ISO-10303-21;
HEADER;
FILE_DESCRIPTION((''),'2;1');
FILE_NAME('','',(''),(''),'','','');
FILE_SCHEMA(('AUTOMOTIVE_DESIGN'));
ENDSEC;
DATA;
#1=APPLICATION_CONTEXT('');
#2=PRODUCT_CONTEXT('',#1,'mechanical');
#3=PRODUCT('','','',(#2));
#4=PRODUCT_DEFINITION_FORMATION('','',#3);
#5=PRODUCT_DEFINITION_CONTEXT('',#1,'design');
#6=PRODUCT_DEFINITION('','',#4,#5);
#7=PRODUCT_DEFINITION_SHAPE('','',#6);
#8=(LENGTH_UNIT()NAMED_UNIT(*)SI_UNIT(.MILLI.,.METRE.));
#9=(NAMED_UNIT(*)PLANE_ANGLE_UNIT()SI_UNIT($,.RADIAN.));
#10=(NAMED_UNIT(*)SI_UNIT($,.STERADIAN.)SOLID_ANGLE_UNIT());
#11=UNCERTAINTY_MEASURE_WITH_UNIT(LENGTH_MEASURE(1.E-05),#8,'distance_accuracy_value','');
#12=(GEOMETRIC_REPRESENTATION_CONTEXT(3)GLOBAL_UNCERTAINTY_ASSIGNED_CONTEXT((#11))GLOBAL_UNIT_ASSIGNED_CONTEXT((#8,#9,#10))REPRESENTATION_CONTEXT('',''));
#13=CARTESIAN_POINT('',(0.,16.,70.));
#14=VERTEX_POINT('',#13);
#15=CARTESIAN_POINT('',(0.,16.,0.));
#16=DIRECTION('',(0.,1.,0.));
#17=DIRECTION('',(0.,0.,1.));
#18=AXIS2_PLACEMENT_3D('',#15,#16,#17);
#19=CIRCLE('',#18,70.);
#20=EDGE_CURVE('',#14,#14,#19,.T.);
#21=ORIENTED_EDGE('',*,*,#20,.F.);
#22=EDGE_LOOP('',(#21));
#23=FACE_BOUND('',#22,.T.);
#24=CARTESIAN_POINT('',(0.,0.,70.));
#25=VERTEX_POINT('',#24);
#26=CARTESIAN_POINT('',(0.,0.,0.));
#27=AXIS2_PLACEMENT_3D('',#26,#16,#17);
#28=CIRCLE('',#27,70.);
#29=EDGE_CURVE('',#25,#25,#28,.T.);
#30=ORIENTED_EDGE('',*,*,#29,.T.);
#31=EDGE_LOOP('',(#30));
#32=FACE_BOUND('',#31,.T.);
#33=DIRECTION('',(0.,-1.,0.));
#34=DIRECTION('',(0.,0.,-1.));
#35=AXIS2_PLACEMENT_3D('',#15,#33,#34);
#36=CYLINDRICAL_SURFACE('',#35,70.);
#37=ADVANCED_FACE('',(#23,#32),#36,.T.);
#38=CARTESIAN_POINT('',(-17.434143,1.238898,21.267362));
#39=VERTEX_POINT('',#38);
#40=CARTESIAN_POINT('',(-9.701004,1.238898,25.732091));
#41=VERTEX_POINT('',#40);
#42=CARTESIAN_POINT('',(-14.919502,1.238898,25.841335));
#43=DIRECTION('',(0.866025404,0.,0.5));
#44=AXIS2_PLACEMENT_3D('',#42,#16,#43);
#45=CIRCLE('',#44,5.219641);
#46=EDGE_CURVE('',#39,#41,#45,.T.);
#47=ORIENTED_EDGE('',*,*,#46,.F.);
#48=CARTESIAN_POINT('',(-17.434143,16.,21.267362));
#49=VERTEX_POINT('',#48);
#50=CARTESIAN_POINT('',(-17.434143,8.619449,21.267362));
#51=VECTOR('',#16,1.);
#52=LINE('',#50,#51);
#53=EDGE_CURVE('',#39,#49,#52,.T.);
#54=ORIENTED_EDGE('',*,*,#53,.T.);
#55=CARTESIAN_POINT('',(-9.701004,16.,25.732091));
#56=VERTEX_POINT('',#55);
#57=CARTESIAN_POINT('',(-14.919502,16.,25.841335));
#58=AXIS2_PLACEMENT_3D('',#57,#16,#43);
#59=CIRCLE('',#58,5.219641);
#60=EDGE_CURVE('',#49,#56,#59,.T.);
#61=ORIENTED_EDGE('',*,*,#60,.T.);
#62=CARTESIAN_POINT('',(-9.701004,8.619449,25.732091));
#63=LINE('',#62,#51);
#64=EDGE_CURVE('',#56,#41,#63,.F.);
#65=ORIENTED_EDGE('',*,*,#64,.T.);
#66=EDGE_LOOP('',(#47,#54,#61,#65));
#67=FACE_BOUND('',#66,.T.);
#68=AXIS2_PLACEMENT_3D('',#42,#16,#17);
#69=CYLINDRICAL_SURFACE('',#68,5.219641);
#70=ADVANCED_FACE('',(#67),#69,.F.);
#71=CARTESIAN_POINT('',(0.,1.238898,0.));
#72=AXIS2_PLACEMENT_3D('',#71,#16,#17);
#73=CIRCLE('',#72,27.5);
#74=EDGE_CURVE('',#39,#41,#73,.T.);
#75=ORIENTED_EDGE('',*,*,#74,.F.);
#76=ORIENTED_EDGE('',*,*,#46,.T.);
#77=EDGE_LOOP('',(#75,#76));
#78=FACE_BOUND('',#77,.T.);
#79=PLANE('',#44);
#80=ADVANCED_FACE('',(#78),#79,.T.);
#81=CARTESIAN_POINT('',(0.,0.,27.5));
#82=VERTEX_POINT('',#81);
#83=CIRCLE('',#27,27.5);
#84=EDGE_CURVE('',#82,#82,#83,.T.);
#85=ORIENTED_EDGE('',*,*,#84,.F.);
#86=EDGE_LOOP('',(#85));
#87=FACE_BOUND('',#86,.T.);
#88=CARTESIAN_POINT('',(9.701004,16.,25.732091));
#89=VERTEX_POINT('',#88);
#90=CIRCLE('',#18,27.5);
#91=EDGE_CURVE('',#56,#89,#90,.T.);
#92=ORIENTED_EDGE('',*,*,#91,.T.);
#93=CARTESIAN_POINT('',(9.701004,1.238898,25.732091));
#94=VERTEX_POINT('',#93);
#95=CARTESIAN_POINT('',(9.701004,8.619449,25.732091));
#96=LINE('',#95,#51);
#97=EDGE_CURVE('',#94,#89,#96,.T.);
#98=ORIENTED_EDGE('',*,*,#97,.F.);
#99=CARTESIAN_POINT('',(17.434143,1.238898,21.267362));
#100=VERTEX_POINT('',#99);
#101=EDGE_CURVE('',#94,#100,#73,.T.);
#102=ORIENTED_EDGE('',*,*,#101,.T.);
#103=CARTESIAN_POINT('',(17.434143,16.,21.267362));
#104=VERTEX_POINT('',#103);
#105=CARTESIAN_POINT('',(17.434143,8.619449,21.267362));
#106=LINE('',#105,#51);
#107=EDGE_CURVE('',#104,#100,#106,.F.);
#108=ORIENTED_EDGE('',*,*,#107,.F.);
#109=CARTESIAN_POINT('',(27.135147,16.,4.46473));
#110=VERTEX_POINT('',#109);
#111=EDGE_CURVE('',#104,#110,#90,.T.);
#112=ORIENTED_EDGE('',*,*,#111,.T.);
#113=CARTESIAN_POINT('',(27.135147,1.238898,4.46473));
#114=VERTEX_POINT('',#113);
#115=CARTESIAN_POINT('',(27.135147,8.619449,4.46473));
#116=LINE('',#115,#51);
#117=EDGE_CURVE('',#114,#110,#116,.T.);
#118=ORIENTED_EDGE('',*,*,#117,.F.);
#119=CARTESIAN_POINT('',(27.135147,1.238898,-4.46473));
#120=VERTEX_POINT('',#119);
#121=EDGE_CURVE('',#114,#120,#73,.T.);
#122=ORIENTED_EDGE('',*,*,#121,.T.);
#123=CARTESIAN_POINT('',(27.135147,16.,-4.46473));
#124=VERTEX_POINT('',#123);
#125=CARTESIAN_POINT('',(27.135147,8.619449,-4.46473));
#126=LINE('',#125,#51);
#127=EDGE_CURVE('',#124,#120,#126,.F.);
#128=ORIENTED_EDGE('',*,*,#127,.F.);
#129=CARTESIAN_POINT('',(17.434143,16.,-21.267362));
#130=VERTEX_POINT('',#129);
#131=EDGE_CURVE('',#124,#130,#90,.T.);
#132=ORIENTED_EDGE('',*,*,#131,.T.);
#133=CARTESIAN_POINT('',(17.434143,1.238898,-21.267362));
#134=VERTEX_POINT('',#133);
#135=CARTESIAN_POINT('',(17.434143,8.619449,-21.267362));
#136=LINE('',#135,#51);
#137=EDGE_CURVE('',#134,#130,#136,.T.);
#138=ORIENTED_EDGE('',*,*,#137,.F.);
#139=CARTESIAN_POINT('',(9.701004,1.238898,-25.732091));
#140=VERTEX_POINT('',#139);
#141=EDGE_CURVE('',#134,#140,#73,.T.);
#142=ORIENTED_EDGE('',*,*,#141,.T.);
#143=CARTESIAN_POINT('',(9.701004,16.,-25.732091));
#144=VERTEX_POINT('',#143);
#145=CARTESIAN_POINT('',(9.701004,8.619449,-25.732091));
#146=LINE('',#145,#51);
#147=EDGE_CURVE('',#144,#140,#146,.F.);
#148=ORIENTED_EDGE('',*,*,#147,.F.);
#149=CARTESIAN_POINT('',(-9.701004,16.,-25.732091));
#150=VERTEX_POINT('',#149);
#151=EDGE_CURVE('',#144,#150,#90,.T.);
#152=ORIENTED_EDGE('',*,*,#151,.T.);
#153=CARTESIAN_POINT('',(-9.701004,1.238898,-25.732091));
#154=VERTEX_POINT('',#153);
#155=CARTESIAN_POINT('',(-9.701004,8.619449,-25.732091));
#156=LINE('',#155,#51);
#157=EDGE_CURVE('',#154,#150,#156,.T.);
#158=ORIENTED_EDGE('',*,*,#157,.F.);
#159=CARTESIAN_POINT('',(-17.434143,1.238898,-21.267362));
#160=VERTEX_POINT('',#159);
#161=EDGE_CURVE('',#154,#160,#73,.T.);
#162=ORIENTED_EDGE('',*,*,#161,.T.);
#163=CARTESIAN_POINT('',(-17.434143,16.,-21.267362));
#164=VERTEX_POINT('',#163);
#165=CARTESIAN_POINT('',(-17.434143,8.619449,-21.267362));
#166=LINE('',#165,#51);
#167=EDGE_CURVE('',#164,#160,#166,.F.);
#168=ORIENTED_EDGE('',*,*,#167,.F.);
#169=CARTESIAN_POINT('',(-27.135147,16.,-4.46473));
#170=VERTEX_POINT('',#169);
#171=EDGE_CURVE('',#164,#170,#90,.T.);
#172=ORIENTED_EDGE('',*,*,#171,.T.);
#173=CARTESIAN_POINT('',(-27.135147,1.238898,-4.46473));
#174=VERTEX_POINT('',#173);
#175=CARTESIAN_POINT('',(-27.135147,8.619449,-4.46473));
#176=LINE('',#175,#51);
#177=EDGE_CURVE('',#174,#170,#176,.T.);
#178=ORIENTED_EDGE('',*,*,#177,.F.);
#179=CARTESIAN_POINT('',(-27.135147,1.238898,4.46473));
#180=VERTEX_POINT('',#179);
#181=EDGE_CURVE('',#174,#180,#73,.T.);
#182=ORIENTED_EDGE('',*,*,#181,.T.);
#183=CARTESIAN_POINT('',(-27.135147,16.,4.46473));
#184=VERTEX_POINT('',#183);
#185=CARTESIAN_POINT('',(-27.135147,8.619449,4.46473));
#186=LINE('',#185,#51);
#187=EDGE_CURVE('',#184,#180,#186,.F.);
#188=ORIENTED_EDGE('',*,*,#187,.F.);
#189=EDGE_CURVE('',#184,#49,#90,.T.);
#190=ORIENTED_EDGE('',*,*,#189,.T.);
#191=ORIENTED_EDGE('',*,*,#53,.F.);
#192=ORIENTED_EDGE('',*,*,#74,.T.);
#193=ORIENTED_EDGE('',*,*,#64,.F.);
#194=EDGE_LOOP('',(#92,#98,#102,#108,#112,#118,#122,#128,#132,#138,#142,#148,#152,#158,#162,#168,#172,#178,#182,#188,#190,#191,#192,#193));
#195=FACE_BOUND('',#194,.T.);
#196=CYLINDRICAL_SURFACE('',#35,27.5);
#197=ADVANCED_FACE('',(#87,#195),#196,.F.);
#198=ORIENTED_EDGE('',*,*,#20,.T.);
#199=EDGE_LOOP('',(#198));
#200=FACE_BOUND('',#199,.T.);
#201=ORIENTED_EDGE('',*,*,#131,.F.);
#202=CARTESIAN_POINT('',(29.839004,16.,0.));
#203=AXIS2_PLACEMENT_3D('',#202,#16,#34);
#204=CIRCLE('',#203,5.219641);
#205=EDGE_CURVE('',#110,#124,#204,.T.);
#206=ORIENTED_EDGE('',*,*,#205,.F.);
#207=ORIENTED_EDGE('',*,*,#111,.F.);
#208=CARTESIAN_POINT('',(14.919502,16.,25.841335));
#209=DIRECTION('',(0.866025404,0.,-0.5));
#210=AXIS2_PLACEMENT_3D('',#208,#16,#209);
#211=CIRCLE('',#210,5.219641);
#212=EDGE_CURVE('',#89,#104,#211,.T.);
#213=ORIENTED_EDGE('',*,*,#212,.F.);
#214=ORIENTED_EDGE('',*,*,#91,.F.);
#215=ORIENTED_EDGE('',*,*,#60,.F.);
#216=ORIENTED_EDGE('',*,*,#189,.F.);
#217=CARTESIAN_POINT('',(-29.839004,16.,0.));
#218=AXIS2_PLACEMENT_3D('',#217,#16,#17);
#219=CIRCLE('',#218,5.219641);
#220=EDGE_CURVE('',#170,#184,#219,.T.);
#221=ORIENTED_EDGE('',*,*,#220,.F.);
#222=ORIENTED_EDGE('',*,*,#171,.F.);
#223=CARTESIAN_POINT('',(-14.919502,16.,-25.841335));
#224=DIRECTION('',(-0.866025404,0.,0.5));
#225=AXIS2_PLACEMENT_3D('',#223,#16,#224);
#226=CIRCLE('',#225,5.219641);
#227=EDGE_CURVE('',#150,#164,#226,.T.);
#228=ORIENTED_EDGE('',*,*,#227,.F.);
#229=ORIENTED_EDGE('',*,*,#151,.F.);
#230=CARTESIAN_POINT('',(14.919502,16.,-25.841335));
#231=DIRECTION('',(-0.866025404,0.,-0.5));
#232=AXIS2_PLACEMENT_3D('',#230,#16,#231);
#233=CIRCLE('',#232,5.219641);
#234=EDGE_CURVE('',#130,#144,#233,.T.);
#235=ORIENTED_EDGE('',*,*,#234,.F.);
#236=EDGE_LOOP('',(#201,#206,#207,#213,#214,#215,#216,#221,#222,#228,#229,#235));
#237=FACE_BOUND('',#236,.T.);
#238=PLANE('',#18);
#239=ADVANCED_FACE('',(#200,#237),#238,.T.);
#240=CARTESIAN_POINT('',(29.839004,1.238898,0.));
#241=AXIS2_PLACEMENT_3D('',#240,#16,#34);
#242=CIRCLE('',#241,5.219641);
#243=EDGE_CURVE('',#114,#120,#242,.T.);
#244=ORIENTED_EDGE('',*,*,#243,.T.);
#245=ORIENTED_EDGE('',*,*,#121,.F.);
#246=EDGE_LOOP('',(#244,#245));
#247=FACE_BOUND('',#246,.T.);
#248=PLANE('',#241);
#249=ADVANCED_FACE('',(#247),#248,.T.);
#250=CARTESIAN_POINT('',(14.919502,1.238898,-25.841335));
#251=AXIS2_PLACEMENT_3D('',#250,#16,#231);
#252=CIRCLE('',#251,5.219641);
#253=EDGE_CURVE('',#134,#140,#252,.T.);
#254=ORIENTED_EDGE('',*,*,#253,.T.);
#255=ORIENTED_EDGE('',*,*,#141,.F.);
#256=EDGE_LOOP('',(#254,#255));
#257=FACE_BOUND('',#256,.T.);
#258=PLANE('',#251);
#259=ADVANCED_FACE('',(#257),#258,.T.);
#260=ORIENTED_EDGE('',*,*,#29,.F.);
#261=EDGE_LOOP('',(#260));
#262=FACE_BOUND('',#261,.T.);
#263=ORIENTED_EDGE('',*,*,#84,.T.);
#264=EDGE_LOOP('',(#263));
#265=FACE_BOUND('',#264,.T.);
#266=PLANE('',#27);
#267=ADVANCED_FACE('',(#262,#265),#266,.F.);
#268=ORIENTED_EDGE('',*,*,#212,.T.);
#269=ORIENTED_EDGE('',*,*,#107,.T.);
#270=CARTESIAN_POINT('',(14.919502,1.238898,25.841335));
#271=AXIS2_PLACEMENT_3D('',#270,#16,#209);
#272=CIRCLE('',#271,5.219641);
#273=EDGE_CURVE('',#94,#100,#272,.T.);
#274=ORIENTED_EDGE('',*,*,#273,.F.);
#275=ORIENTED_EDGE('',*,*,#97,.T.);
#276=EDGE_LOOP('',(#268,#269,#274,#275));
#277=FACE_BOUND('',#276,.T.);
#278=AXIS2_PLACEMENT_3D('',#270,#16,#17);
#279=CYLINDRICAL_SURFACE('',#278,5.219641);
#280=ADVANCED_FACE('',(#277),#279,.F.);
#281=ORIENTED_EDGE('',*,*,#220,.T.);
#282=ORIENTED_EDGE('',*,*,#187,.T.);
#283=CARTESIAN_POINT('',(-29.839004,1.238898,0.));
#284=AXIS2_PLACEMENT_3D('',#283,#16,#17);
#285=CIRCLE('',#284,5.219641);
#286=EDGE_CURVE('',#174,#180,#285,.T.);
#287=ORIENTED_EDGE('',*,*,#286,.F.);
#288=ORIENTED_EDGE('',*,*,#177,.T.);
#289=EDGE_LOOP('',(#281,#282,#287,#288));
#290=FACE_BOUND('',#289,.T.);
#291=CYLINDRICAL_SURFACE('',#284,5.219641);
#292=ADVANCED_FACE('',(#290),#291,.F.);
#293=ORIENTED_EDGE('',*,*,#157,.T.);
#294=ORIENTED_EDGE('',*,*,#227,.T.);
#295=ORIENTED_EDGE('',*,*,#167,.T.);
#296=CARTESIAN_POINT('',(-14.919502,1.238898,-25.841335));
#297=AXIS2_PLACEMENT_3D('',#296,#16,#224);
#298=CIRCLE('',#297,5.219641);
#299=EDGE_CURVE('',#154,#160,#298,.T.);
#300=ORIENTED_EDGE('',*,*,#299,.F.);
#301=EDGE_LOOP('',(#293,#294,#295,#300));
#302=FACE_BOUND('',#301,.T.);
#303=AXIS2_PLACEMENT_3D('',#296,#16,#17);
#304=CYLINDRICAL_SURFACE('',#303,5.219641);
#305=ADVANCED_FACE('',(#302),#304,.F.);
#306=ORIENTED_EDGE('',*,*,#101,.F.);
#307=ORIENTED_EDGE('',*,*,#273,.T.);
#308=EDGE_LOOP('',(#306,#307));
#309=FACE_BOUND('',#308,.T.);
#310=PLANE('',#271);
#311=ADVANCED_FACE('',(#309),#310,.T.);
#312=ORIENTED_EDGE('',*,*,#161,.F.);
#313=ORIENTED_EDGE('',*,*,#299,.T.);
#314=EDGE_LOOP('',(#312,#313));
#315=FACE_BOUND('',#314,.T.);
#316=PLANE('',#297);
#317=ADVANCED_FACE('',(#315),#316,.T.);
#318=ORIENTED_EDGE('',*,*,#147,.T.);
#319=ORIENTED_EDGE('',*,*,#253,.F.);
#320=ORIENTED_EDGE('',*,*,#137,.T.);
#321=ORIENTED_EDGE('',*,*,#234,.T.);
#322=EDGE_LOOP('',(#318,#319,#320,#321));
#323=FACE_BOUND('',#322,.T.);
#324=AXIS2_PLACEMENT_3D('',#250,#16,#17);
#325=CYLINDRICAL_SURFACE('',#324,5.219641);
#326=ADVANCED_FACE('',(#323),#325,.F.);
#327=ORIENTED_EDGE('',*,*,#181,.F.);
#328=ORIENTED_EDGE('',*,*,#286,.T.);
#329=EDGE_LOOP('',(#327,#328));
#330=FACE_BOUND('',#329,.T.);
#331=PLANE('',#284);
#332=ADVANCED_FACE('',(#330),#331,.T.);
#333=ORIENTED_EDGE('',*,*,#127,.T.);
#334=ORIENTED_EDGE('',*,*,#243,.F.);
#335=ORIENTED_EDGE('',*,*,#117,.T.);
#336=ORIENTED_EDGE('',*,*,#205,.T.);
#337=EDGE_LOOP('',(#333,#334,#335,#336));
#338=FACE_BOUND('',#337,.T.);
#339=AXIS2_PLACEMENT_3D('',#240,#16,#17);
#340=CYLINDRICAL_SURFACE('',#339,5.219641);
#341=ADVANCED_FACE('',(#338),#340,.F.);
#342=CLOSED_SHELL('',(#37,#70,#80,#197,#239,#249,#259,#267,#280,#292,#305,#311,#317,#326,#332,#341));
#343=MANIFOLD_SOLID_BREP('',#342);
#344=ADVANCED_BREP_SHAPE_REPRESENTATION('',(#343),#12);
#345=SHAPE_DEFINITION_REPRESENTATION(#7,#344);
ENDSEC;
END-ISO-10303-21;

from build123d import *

# Parameters (mm, degrees)
SKETCH1_R           = 70
BOSS_EXTRUDE1_DEPTH = 16
SKETCH2_R           = 27.5
CUT_EXTRUDE1_DEPTH  = 101.279609094
SKETCH3_R           = 5.21964116
CUT_EXTRUDE2_DEPTH  = 14.761101501
CIRPATTERN1_COUNT   = 6


with BuildPart() as part:
    # Sketch1 → Boss-Extrude1 (new body)
    with BuildSketch(Plane(origin=(0, 0, 0), x_dir=(1, 0, 0), z_dir=(0, 1, 0))):
        Circle(SKETCH1_R)
    extrude(amount=BOSS_EXTRUDE1_DEPTH)

    # Sketch2 → Cut-Extrude1 (cut, through all)
    with BuildSketch(Plane(origin=(0, 0, 0), x_dir=(1, 0, 0), z_dir=(0, 1, 0))):
        Circle(SKETCH2_R)
    extrude(amount=CUT_EXTRUDE1_DEPTH, mode=Mode.SUBTRACT)

    # Sketch3 → Cut-Extrude2 (cut)
    with BuildSketch(Plane(origin=(0, 16, 0), x_dir=(1, 0, 0), z_dir=(0, 1, 0))):
        with Locations((-29.839003919, 0)):
            Circle(SKETCH3_R)
    cut_extrude2 = extrude(amount=-CUT_EXTRUDE2_DEPTH, mode=Mode.SUBTRACT)

    # CirPattern1: Cut-Extrude2 ×6 about axis
    cirpattern1_axis = Axis((0, 0, 0), (0, 1, 0))
    for i in range(1, CIRPATTERN1_COUNT):
        add(cut_extrude2.rotate(cirpattern1_axis, i * 360 / CIRPATTERN1_COUNT), mode=Mode.SUBTRACT)


solid = part.part
